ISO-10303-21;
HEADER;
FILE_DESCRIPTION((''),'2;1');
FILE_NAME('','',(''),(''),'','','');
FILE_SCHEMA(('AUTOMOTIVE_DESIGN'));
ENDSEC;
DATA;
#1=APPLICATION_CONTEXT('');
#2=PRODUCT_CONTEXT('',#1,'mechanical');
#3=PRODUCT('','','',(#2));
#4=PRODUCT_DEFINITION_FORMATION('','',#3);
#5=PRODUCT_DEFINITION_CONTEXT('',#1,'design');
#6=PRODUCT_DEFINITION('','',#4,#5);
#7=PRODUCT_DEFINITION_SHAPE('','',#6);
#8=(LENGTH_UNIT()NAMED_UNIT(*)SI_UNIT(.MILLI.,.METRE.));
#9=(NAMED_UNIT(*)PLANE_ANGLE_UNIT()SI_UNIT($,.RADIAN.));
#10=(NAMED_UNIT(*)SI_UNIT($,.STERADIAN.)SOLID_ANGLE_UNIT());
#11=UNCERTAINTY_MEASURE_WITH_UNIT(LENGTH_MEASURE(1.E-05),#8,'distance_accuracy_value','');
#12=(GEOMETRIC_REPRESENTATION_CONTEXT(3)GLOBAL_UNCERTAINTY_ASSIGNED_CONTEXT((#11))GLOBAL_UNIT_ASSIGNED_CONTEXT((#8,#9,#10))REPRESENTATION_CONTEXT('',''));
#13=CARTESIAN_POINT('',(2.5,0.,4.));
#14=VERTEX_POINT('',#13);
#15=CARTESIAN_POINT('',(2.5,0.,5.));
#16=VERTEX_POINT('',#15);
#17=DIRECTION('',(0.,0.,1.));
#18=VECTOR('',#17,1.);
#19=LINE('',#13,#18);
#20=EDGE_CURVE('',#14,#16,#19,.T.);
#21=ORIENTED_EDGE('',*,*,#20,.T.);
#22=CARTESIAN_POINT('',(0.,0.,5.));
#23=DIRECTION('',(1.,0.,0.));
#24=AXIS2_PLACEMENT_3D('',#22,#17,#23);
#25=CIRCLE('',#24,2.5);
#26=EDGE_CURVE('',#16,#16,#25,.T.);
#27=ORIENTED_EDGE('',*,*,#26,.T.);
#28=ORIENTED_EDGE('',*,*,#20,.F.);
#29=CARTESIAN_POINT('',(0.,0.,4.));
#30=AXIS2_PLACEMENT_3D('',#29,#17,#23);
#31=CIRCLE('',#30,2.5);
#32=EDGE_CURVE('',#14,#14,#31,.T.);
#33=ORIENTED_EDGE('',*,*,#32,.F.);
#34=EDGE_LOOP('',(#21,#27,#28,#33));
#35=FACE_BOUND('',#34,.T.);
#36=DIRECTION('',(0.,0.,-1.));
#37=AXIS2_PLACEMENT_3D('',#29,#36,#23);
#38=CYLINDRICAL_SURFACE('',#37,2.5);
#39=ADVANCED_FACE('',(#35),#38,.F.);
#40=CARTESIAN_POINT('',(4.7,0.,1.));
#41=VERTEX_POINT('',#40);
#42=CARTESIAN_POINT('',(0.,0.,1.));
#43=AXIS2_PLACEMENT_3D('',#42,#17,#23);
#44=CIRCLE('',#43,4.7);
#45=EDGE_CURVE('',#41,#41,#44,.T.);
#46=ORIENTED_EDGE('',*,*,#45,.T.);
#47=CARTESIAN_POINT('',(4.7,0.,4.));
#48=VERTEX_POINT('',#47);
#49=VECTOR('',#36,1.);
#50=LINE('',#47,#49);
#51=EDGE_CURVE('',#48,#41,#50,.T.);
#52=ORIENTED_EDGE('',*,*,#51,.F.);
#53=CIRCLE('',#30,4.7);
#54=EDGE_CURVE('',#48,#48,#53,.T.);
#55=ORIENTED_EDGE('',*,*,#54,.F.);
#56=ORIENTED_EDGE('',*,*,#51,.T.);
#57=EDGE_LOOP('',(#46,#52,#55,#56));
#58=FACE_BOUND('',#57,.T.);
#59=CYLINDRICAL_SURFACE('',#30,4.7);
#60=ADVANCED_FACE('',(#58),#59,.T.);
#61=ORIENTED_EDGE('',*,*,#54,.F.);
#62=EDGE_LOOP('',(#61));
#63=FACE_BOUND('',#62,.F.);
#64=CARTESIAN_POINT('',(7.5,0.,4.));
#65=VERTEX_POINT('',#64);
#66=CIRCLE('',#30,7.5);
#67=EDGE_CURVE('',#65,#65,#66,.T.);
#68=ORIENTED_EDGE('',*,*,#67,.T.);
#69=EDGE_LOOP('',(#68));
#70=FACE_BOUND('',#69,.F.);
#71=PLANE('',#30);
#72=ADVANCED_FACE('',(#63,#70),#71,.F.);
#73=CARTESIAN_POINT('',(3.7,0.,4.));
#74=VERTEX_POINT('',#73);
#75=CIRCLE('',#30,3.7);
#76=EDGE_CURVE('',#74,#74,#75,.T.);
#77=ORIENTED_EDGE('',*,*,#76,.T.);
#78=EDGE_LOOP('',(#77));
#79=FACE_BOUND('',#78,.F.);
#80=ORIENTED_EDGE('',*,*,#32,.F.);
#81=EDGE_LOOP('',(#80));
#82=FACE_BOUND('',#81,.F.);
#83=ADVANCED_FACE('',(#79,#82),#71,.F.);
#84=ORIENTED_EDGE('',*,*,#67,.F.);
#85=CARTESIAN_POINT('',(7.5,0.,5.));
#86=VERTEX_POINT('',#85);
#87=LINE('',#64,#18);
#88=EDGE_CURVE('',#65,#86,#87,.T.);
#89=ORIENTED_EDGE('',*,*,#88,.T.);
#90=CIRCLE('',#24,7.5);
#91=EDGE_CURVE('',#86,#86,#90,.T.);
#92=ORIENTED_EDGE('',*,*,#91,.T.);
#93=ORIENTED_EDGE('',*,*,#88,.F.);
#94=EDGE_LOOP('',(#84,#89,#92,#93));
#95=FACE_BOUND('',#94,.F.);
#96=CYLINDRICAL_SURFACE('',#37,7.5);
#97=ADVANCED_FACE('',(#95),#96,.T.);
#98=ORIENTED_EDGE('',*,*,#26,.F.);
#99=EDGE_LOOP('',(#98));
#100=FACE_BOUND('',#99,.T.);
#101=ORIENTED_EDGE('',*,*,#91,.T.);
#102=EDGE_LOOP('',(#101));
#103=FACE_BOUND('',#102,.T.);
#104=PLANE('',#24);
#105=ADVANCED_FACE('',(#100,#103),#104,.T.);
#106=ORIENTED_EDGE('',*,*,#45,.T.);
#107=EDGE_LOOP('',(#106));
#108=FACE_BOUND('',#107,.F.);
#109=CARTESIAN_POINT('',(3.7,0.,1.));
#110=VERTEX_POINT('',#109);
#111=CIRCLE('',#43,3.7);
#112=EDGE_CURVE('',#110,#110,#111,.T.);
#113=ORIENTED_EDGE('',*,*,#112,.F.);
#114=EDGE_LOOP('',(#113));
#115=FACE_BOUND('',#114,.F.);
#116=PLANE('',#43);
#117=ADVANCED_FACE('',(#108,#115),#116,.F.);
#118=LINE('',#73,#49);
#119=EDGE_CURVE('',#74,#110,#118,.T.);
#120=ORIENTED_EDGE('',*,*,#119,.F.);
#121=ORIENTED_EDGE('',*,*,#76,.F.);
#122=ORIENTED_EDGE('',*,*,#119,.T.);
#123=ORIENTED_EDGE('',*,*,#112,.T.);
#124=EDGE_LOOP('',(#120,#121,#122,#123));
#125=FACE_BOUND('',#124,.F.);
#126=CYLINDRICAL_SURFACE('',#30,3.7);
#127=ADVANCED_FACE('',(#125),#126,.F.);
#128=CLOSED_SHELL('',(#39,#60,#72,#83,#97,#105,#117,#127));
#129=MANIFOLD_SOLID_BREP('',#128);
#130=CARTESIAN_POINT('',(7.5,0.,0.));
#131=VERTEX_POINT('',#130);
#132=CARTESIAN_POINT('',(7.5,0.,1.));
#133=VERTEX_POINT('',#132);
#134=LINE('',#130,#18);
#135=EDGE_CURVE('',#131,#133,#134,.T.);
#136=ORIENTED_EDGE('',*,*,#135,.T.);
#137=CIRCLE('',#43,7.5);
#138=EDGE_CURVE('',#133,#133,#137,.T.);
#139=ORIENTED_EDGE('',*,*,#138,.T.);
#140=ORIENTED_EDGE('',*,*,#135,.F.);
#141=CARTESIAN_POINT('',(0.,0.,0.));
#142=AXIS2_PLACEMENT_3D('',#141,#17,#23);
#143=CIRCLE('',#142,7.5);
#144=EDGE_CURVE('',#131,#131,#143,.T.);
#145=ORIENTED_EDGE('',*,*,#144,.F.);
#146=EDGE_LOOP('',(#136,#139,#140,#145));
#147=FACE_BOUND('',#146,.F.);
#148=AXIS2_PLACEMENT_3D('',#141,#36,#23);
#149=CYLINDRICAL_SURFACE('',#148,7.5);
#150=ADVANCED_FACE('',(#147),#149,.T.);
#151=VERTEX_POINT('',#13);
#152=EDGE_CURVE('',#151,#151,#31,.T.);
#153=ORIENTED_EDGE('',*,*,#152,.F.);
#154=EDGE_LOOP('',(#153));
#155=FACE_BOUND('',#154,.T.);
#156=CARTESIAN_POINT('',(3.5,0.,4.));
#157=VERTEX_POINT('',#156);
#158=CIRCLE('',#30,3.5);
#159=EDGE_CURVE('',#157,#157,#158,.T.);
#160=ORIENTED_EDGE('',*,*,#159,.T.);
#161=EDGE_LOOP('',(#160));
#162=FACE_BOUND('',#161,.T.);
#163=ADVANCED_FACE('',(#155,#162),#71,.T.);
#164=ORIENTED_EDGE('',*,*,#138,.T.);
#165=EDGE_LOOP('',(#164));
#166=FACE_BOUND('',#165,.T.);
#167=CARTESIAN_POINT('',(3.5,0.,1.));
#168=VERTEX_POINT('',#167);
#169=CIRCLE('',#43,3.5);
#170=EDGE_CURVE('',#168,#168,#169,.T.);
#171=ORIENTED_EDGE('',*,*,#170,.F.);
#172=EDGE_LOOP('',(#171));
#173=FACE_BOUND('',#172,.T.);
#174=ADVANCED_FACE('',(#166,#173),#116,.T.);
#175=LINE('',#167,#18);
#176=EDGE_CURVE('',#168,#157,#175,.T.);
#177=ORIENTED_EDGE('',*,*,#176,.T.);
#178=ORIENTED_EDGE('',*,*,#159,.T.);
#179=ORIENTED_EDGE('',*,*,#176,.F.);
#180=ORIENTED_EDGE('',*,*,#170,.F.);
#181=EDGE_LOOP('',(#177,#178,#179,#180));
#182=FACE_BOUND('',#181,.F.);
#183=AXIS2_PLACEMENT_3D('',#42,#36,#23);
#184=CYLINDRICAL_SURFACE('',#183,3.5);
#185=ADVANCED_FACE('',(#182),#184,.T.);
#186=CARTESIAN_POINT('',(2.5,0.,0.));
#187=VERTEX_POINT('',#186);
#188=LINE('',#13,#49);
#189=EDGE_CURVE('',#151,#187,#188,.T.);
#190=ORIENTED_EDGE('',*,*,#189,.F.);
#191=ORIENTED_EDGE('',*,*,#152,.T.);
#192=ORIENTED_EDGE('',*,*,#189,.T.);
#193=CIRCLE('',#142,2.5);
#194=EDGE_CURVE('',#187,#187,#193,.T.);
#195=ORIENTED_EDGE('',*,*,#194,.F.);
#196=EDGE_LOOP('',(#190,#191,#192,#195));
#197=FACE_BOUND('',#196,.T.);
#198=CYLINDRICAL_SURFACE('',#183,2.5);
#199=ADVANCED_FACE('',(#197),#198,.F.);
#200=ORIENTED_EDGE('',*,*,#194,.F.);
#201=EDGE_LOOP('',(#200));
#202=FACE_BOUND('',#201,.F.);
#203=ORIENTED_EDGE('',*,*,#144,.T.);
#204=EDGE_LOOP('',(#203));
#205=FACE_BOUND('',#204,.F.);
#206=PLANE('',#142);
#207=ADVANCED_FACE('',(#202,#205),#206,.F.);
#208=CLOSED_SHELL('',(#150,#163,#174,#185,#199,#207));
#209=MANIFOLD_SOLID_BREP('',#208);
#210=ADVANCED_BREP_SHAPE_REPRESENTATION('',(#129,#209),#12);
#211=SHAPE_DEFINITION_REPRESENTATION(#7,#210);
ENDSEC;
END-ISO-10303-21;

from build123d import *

# Parameters (mm, degrees)
F0_R     = 7.5
F0_R_2   = 3.5
F0_R_3   = 2.5
F1_DEPTH = 1
F2_R     = 3.5
F2_R_2   = 2.5
F3_DEPTH = 3
F4_R     = 4.7
F4_R_2   = 3.7
F5_DEPTH = 3
F4_R_3   = 7.5
F4_R_4   = 3.5
F4_R_5   = 2.5
F6_DEPTH = 1


with BuildPart() as f1:
    # F0 (on Top) → F1 (new body)
    with BuildSketch(Plane.XY):
        Circle(F0_R)
        Circle(F0_R_2, mode=Mode.SUBTRACT)
        Circle(F0_R_2)
        Circle(F0_R_3, mode=Mode.SUBTRACT)
    extrude(amount=F1_DEPTH)

    # F2 (on face) → F3 (join)
    with BuildSketch(Plane.XY.offset(1)):
        Circle(F2_R)
        Circle(F2_R_2, mode=Mode.SUBTRACT)
    extrude(amount=F3_DEPTH)


with BuildPart() as f5:
    # F4 (on face) → F5 (new body, through all)
    with BuildSketch(Plane.XY.offset(4)):
        Circle(F4_R)
        Circle(F4_R_2, mode=Mode.SUBTRACT)
    extrude(amount=-F5_DEPTH)

    # F4 (on face) → F6 (join)
    with BuildSketch(Plane.XY.offset(4)):
        Circle(F4_R_3)
        Circle(F4_R, mode=Mode.SUBTRACT)
        Circle(F4_R)
        Circle(F4_R_2, mode=Mode.SUBTRACT)
        Circle(F4_R_2)
        Circle(F4_R_4, mode=Mode.SUBTRACT)
        Circle(F4_R_4)
        Circle(F4_R_5, mode=Mode.SUBTRACT)
    extrude(amount=F6_DEPTH)


solid = Compound([f1.part, f5.part])
